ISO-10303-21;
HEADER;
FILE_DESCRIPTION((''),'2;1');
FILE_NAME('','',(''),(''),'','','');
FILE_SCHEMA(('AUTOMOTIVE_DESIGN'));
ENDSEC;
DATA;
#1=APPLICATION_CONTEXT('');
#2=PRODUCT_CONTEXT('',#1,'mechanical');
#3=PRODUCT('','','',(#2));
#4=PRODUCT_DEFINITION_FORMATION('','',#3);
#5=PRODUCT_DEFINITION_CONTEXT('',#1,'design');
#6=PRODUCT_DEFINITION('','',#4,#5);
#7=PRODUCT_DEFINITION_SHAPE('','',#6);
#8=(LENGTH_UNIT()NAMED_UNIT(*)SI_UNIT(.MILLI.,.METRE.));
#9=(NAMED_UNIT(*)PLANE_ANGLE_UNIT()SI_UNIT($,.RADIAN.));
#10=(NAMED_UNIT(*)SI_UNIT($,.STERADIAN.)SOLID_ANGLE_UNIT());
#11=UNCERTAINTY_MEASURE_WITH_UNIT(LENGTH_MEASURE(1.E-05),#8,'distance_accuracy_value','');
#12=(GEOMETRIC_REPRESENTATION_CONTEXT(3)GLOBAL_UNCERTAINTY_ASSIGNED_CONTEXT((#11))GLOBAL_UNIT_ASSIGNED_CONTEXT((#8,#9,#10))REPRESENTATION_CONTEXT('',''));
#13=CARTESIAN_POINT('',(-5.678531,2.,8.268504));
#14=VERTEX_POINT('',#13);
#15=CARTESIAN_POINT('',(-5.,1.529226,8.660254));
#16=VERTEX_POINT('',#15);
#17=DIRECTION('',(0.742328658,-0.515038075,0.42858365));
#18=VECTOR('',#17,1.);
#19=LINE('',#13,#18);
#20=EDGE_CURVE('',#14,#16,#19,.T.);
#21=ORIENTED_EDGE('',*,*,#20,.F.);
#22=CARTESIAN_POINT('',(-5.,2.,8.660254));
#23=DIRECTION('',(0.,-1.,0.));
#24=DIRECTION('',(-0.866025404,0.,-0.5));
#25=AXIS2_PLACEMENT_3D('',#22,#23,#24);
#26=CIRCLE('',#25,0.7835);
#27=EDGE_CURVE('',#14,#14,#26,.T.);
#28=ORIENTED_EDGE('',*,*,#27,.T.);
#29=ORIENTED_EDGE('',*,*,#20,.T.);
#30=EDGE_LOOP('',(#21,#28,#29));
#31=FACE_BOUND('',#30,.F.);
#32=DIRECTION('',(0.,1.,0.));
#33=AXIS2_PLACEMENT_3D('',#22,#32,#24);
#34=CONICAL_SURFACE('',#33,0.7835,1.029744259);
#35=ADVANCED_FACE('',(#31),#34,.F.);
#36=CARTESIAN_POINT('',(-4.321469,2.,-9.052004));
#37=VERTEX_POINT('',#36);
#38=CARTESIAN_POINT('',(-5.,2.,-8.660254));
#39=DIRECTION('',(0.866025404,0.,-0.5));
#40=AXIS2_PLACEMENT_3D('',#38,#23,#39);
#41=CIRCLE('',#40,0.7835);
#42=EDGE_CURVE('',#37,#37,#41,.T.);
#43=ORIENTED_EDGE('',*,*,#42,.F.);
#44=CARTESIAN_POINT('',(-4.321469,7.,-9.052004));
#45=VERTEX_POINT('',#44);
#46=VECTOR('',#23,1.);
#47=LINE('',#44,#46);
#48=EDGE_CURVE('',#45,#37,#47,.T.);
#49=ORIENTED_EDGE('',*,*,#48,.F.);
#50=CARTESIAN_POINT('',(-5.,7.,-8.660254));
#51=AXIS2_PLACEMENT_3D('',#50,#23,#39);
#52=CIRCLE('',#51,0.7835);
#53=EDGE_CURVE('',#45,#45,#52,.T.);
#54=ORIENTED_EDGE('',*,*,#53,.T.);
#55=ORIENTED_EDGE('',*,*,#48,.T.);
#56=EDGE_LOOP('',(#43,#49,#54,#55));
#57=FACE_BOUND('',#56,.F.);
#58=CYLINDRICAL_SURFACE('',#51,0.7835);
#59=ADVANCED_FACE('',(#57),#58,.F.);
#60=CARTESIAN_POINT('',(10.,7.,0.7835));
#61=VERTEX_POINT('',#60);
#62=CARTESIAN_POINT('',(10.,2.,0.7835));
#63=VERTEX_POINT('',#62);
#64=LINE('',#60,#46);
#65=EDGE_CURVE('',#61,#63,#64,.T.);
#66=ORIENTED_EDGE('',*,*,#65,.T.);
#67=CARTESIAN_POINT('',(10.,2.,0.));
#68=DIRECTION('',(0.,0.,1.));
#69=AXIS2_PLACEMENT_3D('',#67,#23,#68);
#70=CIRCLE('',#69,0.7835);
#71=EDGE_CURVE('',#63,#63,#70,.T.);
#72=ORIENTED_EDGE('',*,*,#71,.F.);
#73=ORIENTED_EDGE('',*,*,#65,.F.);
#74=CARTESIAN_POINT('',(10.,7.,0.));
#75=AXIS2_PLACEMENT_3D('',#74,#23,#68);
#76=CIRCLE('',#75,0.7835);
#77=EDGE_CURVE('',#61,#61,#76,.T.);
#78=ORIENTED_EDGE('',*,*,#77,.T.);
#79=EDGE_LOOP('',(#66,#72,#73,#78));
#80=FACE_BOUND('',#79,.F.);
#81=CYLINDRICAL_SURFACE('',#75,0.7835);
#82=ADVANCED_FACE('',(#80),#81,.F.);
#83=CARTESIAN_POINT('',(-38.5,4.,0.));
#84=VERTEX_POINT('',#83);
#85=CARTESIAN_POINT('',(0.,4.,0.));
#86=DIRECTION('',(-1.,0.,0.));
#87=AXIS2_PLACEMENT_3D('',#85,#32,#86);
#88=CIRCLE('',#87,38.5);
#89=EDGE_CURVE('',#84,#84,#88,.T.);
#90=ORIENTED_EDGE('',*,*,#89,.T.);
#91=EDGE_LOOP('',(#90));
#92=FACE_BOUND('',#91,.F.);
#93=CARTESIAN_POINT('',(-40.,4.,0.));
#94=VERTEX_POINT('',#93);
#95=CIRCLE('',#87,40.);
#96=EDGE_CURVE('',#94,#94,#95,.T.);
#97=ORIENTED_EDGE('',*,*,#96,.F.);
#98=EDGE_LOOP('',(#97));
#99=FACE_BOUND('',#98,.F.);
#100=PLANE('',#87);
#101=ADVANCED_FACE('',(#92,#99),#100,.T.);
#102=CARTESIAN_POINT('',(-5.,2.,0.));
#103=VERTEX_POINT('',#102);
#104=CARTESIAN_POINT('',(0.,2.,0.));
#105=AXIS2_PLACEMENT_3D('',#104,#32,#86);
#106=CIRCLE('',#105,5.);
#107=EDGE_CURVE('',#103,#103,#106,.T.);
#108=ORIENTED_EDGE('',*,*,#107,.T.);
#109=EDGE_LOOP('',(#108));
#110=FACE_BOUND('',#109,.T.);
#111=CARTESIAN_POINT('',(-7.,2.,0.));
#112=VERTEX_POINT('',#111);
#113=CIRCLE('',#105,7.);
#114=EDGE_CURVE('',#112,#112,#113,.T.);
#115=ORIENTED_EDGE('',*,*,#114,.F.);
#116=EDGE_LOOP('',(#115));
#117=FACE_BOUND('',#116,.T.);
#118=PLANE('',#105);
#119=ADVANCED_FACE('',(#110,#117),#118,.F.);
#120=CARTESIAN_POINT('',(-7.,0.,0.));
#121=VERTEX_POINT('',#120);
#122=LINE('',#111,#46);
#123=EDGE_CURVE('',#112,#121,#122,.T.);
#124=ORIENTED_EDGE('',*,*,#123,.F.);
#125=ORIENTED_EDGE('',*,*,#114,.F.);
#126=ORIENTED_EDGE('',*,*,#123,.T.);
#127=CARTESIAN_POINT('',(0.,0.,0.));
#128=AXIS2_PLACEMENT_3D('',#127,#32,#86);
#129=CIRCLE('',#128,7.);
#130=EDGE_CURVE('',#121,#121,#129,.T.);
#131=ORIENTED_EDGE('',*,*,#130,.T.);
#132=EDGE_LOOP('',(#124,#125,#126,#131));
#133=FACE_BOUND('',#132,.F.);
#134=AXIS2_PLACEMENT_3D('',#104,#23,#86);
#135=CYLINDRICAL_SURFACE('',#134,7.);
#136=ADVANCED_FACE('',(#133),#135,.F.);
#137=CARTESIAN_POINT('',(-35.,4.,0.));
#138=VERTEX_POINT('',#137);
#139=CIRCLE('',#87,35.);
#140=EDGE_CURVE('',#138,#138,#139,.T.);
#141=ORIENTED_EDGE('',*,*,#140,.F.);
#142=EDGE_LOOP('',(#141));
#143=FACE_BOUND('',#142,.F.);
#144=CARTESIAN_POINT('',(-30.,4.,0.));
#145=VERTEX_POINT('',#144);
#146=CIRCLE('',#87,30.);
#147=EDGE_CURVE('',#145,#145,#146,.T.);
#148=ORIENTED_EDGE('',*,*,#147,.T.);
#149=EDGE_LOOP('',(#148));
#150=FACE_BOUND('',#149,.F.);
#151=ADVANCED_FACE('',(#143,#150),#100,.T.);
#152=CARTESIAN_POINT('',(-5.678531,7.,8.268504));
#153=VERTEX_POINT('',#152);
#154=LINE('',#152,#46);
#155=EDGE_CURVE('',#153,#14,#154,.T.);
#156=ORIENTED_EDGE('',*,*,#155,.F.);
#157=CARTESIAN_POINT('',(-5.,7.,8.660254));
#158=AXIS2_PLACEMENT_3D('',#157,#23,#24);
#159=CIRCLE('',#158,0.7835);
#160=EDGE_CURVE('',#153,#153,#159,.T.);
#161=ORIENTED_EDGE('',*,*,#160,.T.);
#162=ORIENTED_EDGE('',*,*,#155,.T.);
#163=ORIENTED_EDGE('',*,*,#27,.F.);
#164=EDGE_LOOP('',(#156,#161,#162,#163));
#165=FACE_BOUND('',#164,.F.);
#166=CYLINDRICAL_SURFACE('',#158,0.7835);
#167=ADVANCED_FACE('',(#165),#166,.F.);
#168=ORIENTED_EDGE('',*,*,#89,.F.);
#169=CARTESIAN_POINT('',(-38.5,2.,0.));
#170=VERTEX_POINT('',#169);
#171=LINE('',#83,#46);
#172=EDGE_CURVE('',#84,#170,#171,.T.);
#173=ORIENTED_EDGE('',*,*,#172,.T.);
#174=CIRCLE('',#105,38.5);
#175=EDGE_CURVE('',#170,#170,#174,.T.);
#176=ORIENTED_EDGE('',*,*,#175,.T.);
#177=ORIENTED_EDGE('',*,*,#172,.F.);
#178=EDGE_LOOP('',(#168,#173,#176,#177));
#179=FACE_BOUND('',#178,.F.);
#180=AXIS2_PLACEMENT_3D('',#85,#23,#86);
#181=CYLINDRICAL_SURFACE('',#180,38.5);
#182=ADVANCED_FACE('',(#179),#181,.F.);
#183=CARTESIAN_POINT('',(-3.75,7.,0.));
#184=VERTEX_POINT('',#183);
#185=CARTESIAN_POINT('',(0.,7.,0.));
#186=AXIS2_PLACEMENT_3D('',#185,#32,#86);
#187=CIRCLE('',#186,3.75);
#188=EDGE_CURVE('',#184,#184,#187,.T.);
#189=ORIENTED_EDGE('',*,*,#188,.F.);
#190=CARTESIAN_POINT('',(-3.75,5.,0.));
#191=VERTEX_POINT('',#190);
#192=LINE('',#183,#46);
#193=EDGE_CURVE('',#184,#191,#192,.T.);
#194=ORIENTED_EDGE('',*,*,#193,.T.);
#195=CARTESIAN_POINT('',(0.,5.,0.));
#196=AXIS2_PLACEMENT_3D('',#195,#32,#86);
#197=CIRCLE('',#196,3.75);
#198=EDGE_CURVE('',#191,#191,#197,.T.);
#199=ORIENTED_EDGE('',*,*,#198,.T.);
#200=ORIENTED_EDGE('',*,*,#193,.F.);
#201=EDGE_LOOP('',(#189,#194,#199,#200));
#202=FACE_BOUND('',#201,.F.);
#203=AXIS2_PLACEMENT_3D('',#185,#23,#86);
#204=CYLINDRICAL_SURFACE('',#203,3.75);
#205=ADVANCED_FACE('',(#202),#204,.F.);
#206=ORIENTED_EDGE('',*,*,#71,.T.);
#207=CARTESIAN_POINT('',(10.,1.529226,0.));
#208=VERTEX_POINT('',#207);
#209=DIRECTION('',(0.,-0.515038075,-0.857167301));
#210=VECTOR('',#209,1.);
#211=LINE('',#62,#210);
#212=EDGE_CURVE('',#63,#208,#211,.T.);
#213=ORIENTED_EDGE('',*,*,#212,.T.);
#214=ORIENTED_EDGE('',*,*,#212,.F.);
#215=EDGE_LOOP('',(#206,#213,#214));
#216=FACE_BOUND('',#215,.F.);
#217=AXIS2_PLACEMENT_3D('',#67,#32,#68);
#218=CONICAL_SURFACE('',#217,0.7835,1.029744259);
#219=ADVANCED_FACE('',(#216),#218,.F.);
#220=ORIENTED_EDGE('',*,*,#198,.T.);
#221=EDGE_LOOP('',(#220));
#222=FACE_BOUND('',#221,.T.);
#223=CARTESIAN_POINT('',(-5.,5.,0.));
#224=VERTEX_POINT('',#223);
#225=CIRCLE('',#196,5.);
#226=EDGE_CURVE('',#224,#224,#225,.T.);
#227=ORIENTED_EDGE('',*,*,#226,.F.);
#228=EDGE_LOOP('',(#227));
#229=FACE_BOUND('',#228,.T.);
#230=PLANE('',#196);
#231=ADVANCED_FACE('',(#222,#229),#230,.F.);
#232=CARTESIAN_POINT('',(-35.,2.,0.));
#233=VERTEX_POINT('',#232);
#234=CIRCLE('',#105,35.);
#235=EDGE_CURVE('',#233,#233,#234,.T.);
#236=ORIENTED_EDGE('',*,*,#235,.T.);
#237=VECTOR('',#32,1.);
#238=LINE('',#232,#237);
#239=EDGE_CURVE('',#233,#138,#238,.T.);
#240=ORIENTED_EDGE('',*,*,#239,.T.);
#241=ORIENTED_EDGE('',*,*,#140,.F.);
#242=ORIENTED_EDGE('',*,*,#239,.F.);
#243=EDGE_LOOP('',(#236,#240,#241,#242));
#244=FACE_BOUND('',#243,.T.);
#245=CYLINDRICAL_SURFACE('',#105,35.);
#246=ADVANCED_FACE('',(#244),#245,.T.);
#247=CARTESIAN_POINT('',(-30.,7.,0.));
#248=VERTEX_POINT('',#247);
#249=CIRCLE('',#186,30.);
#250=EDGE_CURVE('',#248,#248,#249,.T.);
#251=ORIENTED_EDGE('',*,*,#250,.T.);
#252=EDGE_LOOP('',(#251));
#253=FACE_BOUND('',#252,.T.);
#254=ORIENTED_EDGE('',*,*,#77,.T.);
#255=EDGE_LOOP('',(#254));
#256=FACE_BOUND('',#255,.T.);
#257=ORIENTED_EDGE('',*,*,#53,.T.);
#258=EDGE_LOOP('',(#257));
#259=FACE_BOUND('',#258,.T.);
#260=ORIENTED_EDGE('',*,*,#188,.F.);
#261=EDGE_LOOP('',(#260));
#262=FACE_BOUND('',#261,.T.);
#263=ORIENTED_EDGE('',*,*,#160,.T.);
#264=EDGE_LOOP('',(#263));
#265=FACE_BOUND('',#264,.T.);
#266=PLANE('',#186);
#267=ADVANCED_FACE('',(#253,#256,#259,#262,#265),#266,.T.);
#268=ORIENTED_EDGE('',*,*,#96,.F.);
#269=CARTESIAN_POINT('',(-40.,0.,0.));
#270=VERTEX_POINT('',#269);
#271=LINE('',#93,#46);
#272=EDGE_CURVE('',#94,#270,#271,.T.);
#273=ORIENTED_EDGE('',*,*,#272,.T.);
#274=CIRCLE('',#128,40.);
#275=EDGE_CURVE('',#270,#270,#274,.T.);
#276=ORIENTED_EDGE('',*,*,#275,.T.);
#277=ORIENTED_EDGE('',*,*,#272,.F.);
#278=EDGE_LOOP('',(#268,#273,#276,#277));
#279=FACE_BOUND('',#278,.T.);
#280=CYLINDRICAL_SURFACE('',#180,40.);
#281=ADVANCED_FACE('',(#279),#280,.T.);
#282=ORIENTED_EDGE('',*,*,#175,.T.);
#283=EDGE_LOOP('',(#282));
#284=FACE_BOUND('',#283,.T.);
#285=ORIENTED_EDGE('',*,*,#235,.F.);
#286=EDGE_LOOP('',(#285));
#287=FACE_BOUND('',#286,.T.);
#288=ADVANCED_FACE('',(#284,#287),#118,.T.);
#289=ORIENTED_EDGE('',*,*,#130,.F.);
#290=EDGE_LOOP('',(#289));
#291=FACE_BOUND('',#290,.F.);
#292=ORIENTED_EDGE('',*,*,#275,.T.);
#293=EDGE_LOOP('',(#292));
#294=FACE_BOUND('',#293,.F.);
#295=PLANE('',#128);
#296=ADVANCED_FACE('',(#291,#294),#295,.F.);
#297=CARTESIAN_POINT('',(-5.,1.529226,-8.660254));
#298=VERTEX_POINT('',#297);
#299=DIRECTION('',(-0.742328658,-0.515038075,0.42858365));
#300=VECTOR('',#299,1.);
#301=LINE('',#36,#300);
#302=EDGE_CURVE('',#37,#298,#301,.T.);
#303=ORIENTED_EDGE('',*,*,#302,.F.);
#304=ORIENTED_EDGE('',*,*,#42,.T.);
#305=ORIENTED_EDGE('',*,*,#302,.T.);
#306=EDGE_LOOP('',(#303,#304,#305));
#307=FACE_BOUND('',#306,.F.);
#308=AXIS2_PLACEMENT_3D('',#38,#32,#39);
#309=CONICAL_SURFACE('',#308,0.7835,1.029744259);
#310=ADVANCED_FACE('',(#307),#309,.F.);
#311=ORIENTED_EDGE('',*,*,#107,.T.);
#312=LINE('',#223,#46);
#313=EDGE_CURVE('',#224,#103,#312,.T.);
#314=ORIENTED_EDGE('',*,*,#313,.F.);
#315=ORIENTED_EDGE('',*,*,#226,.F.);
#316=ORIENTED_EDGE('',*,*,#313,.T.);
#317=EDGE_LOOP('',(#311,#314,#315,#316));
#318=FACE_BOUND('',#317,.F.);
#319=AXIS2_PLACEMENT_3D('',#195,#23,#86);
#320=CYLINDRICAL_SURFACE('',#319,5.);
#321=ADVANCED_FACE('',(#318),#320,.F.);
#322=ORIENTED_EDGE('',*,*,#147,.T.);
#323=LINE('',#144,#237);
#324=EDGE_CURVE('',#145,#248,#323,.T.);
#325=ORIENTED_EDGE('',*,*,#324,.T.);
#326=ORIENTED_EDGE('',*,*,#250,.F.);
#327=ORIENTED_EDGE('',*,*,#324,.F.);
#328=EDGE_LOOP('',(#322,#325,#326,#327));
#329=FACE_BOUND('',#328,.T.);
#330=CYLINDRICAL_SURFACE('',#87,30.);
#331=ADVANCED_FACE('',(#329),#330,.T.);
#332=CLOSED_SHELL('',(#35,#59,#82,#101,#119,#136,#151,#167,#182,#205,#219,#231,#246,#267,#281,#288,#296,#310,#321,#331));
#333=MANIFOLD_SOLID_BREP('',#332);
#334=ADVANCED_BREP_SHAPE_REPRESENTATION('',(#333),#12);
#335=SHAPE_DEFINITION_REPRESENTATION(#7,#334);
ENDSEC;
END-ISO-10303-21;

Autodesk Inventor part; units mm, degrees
ref_plane "YZ Plane" through (0, 0, 0) normal (1, 0, 0) x (0, 1, 0)
ref_plane "XZ Plane" through (0, 0, 0) normal (0, 1, 0) x (-1, 0, 0)
ref_plane "XY Plane" through (0, 0, 0) normal (0, 0, 1) x (1, 0, 0)
sketch "Sketch1" plane through (0, 0, 0) normal (0, 0, 1) x (1, 0, 0)
  line L0 (0, 0) -> (0, 5) construction
  line L1 (-40, 4) -> (-40, 0)
  line L2 (-40, 0) -> (-4.5, 0)
  line L3 (-38.5, 4) -> (-38.5, 2)
  line L4 (-38.5, 2) -> (-35, 2)
  line L5 (-35, 2) -> (-35, 4)
  line L6 (-30, 4) -> (-35, 4)
  line L7 (-38.5, 4) -> (-40, 4)
  line L8 (-3.75, 5) -> (-5, 5)
  line L9 (-5, 5) -> (-5, 2)
  line L10 (-3.5, 2.9949) -> (3.5, 2.9949)
  line L11 (3.5, 2.9949) -> (3.5, 2.0051)
  line L12 (3.5, 2.0051) -> (-3.5, 2.0051)
  line L13 (-3.5, 2.0051) -> (-3.5, 2.9949)
  line L14 (-3.5, 2.9949) -> (3.5, 2.0051) construction
  line L15 (3.5, 2.9949) -> (-3.5, 2.0051) construction
  line L16 (-30, 4) -> (-30, 7)
  line L17 (-30, 7) -> (-3.75, 7)
  line L18 (-3.75, 7) -> (-3.75, 5)
  line L19 (-5, 2) -> (-7, 2)
  line L20 (-7, 2) -> (-7, 0)
  point P0 (0, 2.5)
  dimension "d0" = 4
  dimension "d3" = 80
  dimension "d6" = 3.5
  dimension "d7" = 2
  dimension "d15" = 70
  dimension "d16" = 7
  dimension "d17" = 1.5
  dimension "d18" = 3
  dimension "d33" = 3
  dimension "d34" = 60
  dimension "d35" = 7.5
  dimension "d40" = 14
  dimension "d41" = 2
revolve "Revolution1" add sketch "Sketch1" angle 360 about axis through (0, 0, 0) along (0, 1, 0) contours L7 L3 L4 L5 L6 L16 L17 L18 L8 L9 L19 L20 L2 L1
sketch "Sketch3" plane through (0, 7, 0) normal (0, 1, 0) x (1, 0, 0)
  circle A0 centre (0, 0) radius 3.75 projected
  point P0 (10, 0)
  dimension "d36" = 10
hole "Hole1" at (10, 7, 0) direction (0, -1, 0) diameter 1.567 depth 5 tip angle 118 thread size "M2x0.4" class "6H" standard "ISO Metric profile"
pattern_circular "Circular Pattern2" count 3 over 360 about axis through (0, 5.5, 0) along (0, 1, 0) of "Hole1"
properties part number "007" material "Stainless Steel, 440C"
